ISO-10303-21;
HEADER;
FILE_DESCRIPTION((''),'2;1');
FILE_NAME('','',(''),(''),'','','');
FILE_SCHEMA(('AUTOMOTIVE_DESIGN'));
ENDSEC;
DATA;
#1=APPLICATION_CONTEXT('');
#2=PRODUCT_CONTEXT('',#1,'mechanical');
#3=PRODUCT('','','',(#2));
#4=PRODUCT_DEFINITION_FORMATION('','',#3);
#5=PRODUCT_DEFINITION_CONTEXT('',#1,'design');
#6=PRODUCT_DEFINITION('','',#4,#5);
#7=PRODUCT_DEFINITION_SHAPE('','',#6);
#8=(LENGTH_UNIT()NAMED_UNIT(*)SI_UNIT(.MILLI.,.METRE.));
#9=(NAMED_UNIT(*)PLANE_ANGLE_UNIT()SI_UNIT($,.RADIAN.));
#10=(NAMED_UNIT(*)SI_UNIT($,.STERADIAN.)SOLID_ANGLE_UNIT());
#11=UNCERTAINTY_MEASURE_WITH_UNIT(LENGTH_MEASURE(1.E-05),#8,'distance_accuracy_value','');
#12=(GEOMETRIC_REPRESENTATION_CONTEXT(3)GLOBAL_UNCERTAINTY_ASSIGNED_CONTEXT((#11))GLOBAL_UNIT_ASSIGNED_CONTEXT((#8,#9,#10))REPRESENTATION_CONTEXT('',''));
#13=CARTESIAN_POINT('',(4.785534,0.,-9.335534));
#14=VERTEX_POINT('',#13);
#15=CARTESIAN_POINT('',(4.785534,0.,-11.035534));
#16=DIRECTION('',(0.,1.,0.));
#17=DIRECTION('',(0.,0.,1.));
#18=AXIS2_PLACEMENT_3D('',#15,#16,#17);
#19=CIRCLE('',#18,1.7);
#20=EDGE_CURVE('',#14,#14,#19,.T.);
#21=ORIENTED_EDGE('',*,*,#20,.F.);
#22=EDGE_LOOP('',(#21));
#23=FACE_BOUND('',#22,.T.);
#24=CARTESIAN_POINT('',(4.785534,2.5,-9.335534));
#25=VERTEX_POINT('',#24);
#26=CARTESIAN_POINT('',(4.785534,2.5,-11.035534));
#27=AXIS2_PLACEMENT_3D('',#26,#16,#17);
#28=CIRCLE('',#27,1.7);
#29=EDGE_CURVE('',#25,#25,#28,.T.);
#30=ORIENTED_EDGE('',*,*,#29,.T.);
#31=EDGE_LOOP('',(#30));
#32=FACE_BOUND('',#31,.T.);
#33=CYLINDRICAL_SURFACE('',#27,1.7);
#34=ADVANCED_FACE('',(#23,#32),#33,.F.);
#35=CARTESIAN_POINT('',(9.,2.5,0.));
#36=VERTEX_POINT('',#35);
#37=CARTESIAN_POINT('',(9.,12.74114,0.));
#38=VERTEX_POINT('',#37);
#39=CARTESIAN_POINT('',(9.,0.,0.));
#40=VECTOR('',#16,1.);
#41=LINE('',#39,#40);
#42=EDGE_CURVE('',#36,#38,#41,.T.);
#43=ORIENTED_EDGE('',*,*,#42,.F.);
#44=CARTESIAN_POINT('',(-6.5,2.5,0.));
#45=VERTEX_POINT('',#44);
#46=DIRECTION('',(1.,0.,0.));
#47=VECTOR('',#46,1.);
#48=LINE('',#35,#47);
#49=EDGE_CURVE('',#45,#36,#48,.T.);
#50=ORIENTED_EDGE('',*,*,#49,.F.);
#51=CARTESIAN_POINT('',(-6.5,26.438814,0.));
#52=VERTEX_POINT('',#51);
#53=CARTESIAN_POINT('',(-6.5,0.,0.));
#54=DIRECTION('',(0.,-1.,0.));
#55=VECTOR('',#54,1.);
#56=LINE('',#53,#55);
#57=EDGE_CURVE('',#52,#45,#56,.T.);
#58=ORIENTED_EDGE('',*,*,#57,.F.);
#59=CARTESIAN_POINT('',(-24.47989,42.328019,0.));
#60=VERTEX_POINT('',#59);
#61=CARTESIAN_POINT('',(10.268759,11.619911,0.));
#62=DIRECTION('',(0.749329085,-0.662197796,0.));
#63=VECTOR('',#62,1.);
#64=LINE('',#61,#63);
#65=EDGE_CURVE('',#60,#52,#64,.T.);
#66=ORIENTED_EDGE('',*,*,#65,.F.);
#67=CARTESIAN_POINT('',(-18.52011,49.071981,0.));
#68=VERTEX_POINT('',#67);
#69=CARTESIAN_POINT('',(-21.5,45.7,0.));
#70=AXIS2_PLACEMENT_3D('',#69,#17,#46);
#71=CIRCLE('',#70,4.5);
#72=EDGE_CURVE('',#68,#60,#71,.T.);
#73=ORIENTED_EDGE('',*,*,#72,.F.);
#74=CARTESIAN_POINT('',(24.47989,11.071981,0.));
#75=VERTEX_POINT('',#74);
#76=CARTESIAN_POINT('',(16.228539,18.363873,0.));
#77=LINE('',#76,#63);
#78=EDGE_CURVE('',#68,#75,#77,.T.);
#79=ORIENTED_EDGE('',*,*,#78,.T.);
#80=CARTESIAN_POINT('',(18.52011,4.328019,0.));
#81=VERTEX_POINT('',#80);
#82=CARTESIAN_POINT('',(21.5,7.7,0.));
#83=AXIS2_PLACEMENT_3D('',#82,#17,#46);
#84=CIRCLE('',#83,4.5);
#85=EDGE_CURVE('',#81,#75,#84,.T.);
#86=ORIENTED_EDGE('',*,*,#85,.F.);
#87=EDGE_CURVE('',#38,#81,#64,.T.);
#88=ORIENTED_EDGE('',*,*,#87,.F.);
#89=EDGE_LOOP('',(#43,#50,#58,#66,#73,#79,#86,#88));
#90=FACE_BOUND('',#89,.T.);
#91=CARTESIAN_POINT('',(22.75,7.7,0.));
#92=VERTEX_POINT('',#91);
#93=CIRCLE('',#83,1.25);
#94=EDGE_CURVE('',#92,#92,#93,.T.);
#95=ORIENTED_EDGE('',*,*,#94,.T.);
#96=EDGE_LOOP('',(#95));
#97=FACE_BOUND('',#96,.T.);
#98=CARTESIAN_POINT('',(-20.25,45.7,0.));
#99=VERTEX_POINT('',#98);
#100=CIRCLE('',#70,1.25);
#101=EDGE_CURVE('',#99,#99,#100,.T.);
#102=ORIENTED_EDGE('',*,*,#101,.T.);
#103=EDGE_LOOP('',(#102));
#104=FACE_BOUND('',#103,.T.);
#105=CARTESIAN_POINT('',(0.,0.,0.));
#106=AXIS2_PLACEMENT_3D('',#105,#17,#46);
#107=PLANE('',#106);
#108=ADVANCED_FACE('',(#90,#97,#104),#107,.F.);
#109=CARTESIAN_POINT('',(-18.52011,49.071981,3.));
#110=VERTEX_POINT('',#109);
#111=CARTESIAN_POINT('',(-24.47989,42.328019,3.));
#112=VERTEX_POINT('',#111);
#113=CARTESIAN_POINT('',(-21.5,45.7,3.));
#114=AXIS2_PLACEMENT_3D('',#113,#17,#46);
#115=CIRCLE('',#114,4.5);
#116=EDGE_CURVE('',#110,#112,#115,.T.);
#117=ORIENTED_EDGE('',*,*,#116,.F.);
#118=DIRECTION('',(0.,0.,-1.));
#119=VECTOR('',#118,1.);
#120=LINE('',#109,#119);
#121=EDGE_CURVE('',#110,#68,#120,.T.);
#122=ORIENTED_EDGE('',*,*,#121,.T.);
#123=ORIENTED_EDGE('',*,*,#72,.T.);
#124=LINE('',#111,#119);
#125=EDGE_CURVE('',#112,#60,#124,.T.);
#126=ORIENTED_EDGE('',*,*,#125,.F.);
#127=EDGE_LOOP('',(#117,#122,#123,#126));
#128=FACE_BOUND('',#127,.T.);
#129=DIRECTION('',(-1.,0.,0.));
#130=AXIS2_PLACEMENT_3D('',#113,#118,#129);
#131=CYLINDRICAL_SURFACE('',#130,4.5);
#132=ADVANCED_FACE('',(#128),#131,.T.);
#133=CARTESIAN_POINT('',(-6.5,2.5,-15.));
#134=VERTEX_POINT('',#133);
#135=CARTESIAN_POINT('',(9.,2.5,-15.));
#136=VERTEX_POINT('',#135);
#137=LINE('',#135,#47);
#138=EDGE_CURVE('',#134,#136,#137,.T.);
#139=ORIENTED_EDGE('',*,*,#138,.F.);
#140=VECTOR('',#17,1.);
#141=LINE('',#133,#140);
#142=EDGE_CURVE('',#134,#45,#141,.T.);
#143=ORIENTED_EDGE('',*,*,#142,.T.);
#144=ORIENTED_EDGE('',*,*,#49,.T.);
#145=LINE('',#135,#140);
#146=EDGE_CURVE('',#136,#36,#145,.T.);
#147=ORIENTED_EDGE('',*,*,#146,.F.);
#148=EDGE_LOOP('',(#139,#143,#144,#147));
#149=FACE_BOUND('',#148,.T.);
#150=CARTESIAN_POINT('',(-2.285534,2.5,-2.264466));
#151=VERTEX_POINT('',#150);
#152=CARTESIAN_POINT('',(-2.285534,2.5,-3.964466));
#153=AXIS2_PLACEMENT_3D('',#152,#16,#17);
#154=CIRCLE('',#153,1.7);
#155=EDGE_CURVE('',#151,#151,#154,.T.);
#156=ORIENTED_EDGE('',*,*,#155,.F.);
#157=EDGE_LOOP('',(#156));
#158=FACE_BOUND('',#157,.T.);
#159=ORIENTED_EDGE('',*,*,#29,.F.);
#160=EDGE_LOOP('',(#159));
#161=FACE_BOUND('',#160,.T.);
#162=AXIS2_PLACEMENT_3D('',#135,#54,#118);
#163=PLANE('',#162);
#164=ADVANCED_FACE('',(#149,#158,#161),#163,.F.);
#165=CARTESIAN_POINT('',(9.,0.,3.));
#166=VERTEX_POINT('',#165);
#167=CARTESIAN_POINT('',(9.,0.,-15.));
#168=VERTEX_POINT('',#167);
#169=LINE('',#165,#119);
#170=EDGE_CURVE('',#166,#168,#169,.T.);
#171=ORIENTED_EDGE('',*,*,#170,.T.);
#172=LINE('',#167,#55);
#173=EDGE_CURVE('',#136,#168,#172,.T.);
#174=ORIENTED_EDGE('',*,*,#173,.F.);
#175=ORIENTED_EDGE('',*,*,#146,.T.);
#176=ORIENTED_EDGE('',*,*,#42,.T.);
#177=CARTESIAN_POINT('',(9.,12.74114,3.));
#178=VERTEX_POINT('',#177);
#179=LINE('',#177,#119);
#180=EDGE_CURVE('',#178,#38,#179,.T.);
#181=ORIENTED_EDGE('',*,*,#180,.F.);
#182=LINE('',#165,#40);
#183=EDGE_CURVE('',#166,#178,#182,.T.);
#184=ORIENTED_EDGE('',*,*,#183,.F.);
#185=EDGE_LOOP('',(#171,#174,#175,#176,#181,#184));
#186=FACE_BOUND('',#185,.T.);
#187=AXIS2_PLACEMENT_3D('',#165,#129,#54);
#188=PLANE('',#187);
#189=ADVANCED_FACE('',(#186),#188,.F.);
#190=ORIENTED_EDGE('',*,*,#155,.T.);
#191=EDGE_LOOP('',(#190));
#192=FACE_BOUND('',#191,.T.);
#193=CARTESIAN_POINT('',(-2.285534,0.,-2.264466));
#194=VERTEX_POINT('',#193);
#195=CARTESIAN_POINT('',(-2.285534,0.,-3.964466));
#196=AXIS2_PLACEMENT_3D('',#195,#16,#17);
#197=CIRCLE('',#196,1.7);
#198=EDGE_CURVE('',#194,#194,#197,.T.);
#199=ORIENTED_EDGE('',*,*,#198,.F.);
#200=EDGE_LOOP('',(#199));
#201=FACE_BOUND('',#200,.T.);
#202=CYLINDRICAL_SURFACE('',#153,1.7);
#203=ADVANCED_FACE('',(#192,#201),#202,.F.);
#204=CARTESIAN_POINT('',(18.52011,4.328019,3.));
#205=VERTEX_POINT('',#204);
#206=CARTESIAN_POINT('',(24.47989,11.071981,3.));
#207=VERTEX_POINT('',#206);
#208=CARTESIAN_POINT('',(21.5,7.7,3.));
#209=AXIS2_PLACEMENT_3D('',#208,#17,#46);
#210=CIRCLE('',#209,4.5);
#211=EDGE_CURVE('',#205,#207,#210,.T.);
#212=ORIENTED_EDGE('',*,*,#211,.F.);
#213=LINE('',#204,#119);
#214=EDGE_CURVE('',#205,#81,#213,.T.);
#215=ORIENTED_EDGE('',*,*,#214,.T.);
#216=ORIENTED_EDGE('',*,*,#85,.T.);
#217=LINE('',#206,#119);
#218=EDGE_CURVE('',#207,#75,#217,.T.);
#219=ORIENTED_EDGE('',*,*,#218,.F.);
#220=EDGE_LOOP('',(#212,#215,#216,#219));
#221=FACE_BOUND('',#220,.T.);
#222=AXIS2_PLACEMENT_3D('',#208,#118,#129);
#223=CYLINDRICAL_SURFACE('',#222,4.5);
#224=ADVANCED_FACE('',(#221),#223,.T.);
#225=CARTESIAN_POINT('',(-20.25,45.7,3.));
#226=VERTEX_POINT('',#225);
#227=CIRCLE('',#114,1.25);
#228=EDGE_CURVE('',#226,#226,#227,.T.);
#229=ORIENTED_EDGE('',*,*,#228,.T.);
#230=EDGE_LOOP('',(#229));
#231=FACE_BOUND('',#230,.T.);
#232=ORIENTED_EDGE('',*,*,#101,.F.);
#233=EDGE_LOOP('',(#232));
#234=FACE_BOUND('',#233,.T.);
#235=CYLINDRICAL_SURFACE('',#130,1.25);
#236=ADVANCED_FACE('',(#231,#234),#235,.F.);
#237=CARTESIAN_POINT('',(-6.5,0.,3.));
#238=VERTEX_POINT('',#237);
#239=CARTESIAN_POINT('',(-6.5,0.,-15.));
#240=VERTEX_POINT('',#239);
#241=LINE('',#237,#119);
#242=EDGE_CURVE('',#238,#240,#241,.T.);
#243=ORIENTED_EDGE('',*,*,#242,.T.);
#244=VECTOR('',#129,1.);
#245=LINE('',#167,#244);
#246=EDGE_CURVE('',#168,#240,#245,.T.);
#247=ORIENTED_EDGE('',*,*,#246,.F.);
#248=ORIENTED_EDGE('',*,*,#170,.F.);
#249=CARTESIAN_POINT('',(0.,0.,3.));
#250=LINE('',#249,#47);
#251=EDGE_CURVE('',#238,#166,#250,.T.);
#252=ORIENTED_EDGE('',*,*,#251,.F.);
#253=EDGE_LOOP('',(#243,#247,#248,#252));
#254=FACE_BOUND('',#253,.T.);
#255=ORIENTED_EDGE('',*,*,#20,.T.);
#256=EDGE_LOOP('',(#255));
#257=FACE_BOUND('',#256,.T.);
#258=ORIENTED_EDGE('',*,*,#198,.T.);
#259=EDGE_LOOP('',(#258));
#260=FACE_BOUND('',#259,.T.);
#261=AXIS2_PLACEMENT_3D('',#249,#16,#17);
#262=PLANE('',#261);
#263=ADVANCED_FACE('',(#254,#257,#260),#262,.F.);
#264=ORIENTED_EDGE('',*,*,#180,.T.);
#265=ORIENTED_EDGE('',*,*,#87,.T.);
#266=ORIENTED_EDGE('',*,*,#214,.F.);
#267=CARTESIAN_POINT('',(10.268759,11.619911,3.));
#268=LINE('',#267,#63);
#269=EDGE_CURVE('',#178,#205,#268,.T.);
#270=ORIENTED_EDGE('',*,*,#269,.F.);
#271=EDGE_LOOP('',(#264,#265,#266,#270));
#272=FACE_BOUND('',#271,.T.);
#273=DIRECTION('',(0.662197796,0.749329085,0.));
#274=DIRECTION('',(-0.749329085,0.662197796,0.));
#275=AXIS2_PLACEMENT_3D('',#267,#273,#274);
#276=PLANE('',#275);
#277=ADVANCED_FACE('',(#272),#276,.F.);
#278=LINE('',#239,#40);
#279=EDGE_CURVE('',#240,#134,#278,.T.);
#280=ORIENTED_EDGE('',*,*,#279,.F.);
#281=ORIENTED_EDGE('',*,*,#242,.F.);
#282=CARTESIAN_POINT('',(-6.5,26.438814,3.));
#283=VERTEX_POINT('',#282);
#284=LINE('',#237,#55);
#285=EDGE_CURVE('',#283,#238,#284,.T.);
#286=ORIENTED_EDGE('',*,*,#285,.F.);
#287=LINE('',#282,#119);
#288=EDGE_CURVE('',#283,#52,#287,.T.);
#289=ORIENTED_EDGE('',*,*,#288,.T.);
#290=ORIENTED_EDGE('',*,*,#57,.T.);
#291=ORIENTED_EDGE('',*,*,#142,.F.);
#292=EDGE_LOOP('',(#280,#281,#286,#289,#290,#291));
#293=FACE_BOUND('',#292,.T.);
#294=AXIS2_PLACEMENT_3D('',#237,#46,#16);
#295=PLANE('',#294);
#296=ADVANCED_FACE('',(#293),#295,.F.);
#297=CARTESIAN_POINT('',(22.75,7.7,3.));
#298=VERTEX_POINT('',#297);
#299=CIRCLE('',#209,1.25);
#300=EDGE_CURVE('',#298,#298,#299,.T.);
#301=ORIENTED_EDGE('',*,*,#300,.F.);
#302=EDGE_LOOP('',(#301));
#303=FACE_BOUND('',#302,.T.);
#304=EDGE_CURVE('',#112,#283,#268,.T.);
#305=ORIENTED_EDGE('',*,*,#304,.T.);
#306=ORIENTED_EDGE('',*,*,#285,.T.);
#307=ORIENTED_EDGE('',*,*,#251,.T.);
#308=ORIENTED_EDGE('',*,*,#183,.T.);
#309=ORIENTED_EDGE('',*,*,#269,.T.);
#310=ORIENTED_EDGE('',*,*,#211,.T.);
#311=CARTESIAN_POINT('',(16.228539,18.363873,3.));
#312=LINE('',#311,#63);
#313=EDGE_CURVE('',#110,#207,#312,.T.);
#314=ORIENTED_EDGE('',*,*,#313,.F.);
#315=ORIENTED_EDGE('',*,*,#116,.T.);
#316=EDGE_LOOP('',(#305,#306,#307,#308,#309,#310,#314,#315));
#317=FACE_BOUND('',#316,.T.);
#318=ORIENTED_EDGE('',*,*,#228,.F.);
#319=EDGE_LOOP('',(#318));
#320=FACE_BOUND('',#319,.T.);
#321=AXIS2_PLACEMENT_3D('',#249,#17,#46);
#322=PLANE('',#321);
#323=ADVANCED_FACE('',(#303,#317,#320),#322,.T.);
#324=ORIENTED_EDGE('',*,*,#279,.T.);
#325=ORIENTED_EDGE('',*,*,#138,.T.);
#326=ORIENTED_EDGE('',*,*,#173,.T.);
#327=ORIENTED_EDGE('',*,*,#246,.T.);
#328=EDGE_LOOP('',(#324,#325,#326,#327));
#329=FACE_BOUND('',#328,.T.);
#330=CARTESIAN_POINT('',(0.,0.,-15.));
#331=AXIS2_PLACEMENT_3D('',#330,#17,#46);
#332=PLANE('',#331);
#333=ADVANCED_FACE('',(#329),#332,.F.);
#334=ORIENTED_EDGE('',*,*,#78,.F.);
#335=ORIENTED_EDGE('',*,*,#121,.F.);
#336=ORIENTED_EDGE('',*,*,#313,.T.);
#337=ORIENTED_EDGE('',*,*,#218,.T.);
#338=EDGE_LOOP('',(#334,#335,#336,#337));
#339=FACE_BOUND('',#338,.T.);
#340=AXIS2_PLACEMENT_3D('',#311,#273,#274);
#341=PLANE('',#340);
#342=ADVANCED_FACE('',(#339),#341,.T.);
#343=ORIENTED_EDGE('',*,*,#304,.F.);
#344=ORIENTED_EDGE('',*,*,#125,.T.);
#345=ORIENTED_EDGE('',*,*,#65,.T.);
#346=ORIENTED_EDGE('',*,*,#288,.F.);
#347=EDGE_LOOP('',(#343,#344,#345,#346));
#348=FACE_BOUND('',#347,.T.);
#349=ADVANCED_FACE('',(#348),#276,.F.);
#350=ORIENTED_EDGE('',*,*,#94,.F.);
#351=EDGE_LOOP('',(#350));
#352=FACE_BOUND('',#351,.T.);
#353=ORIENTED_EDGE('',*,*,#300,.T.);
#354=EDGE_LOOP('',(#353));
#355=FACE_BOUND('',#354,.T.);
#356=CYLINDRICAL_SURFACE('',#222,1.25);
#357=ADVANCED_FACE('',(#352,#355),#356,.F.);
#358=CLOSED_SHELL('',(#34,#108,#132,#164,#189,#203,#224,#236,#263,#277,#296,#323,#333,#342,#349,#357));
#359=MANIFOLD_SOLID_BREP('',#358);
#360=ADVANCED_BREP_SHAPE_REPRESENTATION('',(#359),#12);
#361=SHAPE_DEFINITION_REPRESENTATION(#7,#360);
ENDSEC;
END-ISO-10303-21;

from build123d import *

# Parameters (mm, degrees)
SKETCH1_R            = 1.25
BOSS_EXTRUDE1_DEPTH  = 3
SKETCH2_W            = 18
SKETCH2_H            = 2.5
BOSS_EXTRUDE2_DEPTH  = 15
MOVE_START           = -15
MOVE_FACE1_DEPTH     = 18
M3_CLEARANCE_HOLE1_D = 3.4


# Read off the part's stored shape, not the designer's step: Move Face1
with BuildPart() as part:
    # Sketch1 → Boss-Extrude1 (new body)
    with BuildSketch(Plane.XY):
        with BuildLine():
            Line((24.479890084, 11.071980885), (-18.520109916, 49.071980885))
            ThreePointArc((-18.520109916, 49.071980885), (-24.871980885, 48.679890084), (-24.479890084, 42.328019115))
            Line((-24.479890084, 42.328019115), (-9, 28.64811625))
            Line((-9, 28.64811625), (-9, 0))
            Line((-9, 0), (9, 0))
            Line((9, 0), (9, 12.741139506))
            Line((9, 12.741139506), (18.520109916, 4.328019115))
            ThreePointArc((18.520109916, 4.328019115), (24.871980885, 4.720109916), (24.479890084, 11.071980885))
        make_face()
        with Locations((21.5, 7.7)):
            Circle(SKETCH1_R, mode=Mode.SUBTRACT)
        with Locations((-21.5, 45.7)):
            Circle(SKETCH1_R, mode=Mode.SUBTRACT)
    extrude(amount=BOSS_EXTRUDE1_DEPTH)

    # Sketch2 → Boss-Extrude2 (add)
    with BuildSketch(Plane(origin=(0, 0, 0), x_dir=(-1, 0, 0), z_dir=(0, 0, -1))):
        with Locations((0, 1.25)):
            Rectangle(SKETCH2_W, SKETCH2_H)
    extrude(amount=BOSS_EXTRUDE2_DEPTH)

    # Move Face1 outline → Move Face1 (cut)
    with BuildSketch(Plane.XY.offset(MOVE_START)):
        Polygon((-6.5, 26.438813925), (-9, 28.64811625), (-9, 0), (-6.5, 0), align=None)
    extrude(amount=MOVE_FACE1_DEPTH, mode=Mode.SUBTRACT)

    # M3 Clearance Hole1 (through all)
    with Locations(Plane(origin=(0, 2.5, 0), x_dir=(1, 0, 0), z_dir=(0, 1, 0))):
        with Locations((-2.285533906, 3.964466094), (4.785533906, 11.035533906)):
            Hole(M3_CLEARANCE_HOLE1_D / 2)


solid = part.part
